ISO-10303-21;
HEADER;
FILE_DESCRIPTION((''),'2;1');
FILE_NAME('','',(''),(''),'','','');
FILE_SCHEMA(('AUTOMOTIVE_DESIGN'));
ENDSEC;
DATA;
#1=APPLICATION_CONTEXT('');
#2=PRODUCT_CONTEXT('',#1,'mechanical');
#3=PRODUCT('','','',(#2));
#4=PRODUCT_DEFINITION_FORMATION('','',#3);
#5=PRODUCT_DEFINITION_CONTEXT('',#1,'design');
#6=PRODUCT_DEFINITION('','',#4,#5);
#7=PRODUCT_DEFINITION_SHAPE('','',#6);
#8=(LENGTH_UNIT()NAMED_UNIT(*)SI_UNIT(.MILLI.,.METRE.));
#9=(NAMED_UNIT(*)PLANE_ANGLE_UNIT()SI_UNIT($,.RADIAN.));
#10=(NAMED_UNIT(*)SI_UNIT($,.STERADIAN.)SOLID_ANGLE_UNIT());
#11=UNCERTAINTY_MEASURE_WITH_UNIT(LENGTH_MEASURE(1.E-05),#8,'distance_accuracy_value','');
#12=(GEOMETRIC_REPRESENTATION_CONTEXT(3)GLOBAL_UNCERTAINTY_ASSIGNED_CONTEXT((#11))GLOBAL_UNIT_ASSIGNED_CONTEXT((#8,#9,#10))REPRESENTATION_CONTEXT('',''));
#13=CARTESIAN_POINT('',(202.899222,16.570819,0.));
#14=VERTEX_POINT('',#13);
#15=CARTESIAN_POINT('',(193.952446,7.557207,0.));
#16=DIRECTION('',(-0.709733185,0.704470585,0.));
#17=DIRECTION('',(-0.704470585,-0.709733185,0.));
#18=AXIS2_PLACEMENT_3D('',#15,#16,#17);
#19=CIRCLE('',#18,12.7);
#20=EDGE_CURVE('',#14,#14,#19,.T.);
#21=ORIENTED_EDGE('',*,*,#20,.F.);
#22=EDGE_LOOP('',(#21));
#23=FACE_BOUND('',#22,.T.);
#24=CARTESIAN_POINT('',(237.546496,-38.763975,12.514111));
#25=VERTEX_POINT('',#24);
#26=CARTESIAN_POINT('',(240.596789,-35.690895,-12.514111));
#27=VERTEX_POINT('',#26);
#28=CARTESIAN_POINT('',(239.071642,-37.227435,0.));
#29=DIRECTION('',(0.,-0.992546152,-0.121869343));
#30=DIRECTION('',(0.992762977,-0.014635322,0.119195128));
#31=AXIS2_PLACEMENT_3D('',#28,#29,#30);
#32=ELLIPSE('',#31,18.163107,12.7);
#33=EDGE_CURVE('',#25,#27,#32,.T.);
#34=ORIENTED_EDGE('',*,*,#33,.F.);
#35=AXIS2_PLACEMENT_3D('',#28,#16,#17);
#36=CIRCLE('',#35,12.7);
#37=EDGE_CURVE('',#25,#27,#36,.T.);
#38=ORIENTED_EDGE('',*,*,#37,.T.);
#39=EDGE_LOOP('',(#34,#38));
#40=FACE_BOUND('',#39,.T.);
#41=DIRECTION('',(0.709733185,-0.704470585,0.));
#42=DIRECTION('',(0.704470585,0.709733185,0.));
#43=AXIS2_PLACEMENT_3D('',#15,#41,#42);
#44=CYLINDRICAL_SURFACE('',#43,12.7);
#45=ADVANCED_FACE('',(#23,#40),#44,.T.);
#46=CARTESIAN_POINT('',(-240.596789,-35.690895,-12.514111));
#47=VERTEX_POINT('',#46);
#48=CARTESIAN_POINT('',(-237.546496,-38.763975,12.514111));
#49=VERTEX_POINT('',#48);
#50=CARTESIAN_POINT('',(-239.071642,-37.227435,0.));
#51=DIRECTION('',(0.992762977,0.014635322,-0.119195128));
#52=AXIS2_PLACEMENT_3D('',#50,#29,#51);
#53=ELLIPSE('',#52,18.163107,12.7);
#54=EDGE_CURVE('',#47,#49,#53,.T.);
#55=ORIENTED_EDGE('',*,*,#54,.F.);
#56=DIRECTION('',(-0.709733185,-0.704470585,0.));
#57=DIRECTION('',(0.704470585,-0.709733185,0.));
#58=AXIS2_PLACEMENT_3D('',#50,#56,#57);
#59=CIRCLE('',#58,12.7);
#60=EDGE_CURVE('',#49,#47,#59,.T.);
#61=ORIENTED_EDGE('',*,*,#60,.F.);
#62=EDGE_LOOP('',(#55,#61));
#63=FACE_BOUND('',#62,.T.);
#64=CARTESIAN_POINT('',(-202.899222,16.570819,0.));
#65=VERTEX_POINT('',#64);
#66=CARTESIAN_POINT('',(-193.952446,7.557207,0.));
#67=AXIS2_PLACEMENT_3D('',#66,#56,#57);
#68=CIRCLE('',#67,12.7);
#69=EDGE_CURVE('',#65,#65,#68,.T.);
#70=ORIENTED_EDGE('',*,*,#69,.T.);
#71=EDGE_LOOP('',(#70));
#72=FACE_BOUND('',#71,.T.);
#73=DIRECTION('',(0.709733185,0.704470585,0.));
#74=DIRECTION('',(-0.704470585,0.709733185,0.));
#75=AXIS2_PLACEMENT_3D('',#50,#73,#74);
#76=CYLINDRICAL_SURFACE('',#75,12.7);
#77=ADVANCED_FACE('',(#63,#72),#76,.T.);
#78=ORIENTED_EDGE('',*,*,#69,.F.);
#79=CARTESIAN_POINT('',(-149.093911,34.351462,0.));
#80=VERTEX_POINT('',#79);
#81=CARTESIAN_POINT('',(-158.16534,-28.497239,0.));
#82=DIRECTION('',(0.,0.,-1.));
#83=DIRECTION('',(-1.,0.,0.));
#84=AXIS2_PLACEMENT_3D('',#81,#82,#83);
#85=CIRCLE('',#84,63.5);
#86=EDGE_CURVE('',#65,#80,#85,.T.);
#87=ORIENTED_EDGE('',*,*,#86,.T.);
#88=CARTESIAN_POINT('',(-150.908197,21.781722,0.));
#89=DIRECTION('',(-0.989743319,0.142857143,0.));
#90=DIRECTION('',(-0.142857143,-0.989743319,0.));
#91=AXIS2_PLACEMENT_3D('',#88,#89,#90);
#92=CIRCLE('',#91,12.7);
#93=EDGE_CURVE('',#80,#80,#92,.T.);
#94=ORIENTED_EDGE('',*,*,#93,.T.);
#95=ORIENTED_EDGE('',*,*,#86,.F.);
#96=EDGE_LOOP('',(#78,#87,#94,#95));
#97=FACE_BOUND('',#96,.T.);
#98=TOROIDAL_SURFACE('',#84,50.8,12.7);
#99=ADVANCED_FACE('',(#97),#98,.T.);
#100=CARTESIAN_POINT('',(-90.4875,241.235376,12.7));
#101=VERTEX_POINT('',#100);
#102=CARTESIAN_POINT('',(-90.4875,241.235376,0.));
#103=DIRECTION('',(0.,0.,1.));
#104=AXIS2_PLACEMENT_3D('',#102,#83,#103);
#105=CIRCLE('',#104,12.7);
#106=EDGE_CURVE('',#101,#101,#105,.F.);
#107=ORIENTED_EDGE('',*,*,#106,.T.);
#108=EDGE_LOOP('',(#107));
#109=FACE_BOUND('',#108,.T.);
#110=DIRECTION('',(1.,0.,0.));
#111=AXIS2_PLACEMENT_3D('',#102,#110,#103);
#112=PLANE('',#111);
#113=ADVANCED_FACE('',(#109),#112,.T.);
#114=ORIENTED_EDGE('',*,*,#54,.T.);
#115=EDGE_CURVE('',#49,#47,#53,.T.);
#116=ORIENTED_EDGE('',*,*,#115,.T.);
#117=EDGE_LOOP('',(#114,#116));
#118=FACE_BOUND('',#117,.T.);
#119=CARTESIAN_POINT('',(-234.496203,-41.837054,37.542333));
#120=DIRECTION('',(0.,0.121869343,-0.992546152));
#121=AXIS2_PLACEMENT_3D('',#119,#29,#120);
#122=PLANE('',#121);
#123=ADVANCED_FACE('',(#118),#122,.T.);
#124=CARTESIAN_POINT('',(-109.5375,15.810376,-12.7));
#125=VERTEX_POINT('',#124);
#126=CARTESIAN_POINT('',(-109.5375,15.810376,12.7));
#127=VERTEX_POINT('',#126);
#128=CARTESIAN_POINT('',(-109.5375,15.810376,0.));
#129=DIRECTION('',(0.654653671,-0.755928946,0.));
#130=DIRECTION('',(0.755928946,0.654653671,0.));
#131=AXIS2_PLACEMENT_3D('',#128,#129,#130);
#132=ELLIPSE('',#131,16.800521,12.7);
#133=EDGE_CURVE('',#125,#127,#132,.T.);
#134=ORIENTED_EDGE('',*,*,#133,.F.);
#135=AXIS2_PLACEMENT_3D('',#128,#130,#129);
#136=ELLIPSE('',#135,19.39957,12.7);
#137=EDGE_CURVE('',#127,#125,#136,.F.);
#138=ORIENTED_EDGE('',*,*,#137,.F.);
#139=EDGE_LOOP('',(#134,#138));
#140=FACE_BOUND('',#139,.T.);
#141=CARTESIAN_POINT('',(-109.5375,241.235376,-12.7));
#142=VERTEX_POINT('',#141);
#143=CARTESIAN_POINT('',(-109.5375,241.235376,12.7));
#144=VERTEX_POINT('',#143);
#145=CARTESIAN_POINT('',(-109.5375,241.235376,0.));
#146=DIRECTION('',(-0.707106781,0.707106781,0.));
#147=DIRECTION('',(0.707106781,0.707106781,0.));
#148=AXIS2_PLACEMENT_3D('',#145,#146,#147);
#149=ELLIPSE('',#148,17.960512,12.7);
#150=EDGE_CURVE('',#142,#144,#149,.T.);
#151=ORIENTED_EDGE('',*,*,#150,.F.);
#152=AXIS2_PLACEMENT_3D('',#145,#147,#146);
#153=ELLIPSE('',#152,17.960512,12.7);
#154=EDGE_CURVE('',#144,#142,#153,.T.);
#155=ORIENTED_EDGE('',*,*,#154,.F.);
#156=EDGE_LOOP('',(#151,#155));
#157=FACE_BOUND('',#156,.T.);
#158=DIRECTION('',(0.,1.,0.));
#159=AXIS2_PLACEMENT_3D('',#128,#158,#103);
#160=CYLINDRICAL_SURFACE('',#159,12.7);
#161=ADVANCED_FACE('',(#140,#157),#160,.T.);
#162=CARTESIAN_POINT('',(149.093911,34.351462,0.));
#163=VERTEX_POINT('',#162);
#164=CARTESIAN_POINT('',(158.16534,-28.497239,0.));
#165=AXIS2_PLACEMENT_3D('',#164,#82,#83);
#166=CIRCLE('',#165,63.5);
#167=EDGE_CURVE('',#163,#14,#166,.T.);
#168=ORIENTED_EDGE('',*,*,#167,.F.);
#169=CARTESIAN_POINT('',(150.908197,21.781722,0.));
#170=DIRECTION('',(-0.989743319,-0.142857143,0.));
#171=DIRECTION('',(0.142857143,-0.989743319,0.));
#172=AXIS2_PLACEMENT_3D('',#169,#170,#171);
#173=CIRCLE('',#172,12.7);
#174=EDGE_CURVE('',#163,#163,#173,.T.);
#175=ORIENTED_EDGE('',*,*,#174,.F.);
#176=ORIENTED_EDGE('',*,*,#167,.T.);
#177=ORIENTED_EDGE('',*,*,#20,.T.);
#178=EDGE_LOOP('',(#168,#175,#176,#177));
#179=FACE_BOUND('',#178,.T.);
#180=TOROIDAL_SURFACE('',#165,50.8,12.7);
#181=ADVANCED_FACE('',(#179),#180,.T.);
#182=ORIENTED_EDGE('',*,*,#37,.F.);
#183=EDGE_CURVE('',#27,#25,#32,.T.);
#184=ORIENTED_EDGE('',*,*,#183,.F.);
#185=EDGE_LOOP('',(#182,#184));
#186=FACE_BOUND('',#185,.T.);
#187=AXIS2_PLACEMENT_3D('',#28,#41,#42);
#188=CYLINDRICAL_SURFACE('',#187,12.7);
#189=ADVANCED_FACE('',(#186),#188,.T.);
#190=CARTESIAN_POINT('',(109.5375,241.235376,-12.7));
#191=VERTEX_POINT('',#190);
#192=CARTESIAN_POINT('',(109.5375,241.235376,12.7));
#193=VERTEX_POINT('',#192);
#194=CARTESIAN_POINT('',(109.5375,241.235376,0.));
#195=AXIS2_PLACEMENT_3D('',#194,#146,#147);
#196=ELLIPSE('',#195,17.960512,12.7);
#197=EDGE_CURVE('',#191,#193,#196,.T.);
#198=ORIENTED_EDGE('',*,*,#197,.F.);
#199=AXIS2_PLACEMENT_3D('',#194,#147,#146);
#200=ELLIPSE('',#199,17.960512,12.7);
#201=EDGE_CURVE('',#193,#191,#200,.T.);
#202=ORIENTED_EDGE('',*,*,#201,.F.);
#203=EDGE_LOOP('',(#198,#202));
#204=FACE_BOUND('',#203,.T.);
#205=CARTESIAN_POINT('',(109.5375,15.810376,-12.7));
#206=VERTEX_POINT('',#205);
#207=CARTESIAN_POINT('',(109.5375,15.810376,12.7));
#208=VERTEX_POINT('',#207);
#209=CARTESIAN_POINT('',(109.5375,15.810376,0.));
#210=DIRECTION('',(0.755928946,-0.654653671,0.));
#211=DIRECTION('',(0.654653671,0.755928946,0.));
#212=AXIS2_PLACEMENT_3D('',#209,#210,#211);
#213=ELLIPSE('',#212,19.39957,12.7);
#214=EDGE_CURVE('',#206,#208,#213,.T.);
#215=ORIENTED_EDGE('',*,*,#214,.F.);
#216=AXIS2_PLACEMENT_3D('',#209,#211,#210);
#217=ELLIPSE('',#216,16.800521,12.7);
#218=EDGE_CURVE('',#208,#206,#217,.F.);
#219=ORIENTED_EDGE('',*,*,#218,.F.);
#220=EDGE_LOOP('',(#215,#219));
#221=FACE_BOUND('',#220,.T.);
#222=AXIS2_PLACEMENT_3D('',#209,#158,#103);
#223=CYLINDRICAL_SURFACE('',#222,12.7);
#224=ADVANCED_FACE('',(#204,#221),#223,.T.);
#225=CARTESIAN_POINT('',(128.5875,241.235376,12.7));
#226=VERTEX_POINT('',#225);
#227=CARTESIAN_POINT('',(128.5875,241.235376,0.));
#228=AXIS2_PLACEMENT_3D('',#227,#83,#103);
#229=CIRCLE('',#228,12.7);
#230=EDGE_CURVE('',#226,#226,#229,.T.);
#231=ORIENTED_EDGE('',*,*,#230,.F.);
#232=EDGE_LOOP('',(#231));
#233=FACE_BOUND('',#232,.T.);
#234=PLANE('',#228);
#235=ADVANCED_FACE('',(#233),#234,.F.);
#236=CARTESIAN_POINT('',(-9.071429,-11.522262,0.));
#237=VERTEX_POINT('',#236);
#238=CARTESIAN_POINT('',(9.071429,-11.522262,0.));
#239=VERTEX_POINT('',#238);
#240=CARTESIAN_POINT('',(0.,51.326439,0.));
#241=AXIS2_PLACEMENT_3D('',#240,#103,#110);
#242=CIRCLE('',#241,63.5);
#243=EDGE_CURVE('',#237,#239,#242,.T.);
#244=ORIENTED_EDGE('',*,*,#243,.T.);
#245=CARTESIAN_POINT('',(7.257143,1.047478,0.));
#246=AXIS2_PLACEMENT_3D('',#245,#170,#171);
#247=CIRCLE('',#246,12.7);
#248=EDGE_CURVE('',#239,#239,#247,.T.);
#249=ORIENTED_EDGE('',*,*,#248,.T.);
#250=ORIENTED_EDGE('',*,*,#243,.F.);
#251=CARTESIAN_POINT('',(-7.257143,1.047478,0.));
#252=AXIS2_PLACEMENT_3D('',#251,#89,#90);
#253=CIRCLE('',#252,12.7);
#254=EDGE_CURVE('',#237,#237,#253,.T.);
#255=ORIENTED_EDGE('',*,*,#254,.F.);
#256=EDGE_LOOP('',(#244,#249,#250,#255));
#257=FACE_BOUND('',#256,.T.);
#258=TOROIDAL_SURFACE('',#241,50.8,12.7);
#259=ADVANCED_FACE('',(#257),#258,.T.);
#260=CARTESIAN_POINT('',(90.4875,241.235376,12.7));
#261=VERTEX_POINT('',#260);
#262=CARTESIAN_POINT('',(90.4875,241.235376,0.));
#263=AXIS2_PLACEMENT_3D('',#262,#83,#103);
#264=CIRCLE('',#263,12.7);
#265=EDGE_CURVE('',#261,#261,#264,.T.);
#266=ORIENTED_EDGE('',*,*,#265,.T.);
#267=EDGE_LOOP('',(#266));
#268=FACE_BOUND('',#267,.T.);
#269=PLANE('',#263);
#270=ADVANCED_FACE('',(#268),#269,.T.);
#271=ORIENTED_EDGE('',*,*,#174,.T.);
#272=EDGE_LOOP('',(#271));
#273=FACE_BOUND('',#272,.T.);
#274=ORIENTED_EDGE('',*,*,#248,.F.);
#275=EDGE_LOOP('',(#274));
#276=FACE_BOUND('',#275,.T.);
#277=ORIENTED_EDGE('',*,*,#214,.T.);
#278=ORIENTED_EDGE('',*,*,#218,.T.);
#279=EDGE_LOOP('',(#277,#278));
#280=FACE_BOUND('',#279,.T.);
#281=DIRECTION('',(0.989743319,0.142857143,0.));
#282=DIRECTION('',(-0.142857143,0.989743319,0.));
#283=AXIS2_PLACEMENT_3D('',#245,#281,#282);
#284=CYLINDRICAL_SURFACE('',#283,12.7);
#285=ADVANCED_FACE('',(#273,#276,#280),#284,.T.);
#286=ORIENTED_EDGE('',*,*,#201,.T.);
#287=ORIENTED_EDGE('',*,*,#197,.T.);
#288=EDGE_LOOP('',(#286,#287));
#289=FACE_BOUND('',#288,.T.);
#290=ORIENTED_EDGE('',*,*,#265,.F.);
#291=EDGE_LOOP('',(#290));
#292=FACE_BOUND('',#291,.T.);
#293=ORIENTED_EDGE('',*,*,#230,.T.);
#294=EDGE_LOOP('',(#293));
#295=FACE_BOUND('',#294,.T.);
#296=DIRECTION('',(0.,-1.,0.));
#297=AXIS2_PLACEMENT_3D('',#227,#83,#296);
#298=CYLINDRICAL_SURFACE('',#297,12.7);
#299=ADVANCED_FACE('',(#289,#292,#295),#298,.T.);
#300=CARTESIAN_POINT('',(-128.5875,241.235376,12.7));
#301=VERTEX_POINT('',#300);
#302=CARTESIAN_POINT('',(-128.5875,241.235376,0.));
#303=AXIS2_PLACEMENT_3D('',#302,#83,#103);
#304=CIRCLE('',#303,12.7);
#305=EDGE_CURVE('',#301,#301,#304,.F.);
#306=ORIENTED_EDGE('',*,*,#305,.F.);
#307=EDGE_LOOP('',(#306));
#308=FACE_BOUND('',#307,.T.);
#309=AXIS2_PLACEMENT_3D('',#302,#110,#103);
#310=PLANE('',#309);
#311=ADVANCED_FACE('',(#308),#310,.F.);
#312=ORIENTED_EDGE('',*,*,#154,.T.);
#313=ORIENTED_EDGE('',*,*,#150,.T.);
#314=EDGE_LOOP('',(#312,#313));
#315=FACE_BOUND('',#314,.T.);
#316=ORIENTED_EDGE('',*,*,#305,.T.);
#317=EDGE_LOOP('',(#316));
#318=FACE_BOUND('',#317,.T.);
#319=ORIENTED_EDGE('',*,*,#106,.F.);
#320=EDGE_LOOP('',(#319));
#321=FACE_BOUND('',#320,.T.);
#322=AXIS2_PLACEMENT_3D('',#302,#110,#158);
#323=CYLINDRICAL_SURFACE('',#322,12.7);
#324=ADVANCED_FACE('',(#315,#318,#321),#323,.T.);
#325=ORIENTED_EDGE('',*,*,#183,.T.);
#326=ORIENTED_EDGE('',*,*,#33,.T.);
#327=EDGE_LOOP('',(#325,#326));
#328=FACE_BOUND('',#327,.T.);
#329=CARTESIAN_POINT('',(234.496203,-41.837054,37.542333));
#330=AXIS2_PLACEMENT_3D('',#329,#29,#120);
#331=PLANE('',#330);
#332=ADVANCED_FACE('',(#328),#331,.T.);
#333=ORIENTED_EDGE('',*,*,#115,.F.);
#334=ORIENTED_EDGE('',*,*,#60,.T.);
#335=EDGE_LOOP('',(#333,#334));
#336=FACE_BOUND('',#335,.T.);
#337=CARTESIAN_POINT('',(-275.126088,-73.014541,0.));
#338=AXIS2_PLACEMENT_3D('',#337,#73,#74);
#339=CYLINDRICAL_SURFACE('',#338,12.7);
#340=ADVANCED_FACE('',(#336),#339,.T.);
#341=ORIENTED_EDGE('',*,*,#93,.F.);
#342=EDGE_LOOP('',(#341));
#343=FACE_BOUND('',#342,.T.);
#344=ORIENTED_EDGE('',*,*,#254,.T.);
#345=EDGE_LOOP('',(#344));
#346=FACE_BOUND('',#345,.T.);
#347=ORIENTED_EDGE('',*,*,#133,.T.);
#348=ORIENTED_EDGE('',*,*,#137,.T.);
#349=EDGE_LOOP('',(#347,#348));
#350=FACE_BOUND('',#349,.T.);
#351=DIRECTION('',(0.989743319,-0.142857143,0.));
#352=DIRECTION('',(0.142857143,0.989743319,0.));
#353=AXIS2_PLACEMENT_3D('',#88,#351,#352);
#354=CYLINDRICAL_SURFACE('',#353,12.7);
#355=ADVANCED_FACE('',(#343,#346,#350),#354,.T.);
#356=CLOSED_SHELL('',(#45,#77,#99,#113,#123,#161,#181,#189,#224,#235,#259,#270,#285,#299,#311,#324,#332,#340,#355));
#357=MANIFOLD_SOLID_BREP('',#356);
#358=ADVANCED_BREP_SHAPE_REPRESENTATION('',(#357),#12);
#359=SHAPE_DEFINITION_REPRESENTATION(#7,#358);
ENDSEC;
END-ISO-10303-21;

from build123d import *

# Parameters (mm, degrees)
SWEEP1_PROFILE_R     = 12.7
SWEEP2_PROFILE_R     = 12.7
SWEEP3_PROFILE_R     = 12.7
CUT_SWEEP1_START     = -81.549620248
CUT_SWEEP1_OUTLINE_W = 67
CUT_SWEEP1_OUTLINE_H = 33
CUT_SWEEP1_DEPTH     = 44.599672867


# Read off the part's stored shape, not the designer's step: Cut-Sweep1
with BuildPart() as part:
    # Sweep1: sweep along a path in Sketch1
    with BuildLine(Plane.XY) as sweep1_path:
        Line((275.126088043, -73.014540772), (239.071642227, -37.227435037))
        Line((239.071642227, -37.227435037), (193.952445621, 7.557207275))
        ThreePointArc((193.952445621, 7.557207275), (174.105035635, 19.737252225), (150.908197029, 21.781722044))
        Line((150.908197029, 21.781722044), (7.257142857, 1.047478346))
        ThreePointArc((7.257142857, 1.047478346), (0, 0.526438931), (-7.257142857, 1.047478346))
        Line((-7.257142857, 1.047478346), (-150.908197029, 21.781722044))
        ThreePointArc((-150.908197029, 21.781722044), (-174.105035635, 19.737252225), (-193.952445621, 7.557207275))
        Line((-193.952445621, 7.557207275), (-239.071642227, -37.227435037))
        Line((-239.071642227, -37.227435037), (-275.126088043, -73.014540772))
    # Sweep1 profile (on start of the path) → Sweep1 (sweep)
    with BuildSketch(Plane(origin=(275.126088043, -73.014540772, 0), x_dir=(-0.7044705853386212, -0.7097331853539472, 0), z_dir=(-0.7097331853539472, 0.7044705853386212, 0))):
        Circle(SWEEP1_PROFILE_R)
    sweep(path=sweep1_path.line)

    # Sweep2: sweep along a path in Sketch1<3>
    with BuildLine(Plane.XY) as sweep2_path:
        Line((109.5375, 15.810376278), (109.5375, 241.235376278))
    # Sweep2 profile (on start of the path) → Sweep2 (sweep)
    with BuildSketch(Plane(origin=(109.5375, 15.810376278, 0), x_dir=(0, 0, 1), z_dir=(0, 1, 0))):
        Circle(SWEEP2_PROFILE_R)
    sweep2 = sweep(path=sweep2_path.line)

    # Sweep3: sweep along a path in Sketch1<4>
    with BuildLine(Plane.XY) as sweep3_path:
        Line((128.5875, 241.235376278), (90.4875, 241.235376278))
    # Sweep3 profile (on start of the path) → Sweep3 (sweep)
    with BuildSketch(Plane(origin=(128.5875, 241.235376278, 0), x_dir=(0, -1, 0), z_dir=(-1, 0, 0))):
        Circle(SWEEP3_PROFILE_R)
    sweep3 = sweep(path=sweep3_path.line)

    # Cut-Sweep1 outline → Cut-Sweep1 (cut)
    with BuildSketch(Plane(origin=(0, 0, 0), x_dir=(1, 0, 0), z_dir=(0, 0.992546151641322, 0.121869343405149)).offset(CUT_SWEEP1_START)):
        with Locations((252.5, -6.5)):
            Rectangle(CUT_SWEEP1_OUTLINE_W, CUT_SWEEP1_OUTLINE_H)
    cut_sweep1 = extrude(amount=CUT_SWEEP1_DEPTH, mode=Mode.SUBTRACT)

    # Mirror2: Sweep2, Sweep3, Cut-Sweep1 across plane
    add(sweep2.mirror(Plane(origin=(0, 0, 0), x_dir=(0, 0, 1), z_dir=(1, 0, 0))))
    add(sweep3.mirror(Plane(origin=(0, 0, 0), x_dir=(0, 0, 1), z_dir=(1, 0, 0))))
    add(cut_sweep1.mirror(Plane(origin=(0, 0, 0), x_dir=(0, 0, 1), z_dir=(1, 0, 0))), mode=Mode.SUBTRACT)


solid = part.part
